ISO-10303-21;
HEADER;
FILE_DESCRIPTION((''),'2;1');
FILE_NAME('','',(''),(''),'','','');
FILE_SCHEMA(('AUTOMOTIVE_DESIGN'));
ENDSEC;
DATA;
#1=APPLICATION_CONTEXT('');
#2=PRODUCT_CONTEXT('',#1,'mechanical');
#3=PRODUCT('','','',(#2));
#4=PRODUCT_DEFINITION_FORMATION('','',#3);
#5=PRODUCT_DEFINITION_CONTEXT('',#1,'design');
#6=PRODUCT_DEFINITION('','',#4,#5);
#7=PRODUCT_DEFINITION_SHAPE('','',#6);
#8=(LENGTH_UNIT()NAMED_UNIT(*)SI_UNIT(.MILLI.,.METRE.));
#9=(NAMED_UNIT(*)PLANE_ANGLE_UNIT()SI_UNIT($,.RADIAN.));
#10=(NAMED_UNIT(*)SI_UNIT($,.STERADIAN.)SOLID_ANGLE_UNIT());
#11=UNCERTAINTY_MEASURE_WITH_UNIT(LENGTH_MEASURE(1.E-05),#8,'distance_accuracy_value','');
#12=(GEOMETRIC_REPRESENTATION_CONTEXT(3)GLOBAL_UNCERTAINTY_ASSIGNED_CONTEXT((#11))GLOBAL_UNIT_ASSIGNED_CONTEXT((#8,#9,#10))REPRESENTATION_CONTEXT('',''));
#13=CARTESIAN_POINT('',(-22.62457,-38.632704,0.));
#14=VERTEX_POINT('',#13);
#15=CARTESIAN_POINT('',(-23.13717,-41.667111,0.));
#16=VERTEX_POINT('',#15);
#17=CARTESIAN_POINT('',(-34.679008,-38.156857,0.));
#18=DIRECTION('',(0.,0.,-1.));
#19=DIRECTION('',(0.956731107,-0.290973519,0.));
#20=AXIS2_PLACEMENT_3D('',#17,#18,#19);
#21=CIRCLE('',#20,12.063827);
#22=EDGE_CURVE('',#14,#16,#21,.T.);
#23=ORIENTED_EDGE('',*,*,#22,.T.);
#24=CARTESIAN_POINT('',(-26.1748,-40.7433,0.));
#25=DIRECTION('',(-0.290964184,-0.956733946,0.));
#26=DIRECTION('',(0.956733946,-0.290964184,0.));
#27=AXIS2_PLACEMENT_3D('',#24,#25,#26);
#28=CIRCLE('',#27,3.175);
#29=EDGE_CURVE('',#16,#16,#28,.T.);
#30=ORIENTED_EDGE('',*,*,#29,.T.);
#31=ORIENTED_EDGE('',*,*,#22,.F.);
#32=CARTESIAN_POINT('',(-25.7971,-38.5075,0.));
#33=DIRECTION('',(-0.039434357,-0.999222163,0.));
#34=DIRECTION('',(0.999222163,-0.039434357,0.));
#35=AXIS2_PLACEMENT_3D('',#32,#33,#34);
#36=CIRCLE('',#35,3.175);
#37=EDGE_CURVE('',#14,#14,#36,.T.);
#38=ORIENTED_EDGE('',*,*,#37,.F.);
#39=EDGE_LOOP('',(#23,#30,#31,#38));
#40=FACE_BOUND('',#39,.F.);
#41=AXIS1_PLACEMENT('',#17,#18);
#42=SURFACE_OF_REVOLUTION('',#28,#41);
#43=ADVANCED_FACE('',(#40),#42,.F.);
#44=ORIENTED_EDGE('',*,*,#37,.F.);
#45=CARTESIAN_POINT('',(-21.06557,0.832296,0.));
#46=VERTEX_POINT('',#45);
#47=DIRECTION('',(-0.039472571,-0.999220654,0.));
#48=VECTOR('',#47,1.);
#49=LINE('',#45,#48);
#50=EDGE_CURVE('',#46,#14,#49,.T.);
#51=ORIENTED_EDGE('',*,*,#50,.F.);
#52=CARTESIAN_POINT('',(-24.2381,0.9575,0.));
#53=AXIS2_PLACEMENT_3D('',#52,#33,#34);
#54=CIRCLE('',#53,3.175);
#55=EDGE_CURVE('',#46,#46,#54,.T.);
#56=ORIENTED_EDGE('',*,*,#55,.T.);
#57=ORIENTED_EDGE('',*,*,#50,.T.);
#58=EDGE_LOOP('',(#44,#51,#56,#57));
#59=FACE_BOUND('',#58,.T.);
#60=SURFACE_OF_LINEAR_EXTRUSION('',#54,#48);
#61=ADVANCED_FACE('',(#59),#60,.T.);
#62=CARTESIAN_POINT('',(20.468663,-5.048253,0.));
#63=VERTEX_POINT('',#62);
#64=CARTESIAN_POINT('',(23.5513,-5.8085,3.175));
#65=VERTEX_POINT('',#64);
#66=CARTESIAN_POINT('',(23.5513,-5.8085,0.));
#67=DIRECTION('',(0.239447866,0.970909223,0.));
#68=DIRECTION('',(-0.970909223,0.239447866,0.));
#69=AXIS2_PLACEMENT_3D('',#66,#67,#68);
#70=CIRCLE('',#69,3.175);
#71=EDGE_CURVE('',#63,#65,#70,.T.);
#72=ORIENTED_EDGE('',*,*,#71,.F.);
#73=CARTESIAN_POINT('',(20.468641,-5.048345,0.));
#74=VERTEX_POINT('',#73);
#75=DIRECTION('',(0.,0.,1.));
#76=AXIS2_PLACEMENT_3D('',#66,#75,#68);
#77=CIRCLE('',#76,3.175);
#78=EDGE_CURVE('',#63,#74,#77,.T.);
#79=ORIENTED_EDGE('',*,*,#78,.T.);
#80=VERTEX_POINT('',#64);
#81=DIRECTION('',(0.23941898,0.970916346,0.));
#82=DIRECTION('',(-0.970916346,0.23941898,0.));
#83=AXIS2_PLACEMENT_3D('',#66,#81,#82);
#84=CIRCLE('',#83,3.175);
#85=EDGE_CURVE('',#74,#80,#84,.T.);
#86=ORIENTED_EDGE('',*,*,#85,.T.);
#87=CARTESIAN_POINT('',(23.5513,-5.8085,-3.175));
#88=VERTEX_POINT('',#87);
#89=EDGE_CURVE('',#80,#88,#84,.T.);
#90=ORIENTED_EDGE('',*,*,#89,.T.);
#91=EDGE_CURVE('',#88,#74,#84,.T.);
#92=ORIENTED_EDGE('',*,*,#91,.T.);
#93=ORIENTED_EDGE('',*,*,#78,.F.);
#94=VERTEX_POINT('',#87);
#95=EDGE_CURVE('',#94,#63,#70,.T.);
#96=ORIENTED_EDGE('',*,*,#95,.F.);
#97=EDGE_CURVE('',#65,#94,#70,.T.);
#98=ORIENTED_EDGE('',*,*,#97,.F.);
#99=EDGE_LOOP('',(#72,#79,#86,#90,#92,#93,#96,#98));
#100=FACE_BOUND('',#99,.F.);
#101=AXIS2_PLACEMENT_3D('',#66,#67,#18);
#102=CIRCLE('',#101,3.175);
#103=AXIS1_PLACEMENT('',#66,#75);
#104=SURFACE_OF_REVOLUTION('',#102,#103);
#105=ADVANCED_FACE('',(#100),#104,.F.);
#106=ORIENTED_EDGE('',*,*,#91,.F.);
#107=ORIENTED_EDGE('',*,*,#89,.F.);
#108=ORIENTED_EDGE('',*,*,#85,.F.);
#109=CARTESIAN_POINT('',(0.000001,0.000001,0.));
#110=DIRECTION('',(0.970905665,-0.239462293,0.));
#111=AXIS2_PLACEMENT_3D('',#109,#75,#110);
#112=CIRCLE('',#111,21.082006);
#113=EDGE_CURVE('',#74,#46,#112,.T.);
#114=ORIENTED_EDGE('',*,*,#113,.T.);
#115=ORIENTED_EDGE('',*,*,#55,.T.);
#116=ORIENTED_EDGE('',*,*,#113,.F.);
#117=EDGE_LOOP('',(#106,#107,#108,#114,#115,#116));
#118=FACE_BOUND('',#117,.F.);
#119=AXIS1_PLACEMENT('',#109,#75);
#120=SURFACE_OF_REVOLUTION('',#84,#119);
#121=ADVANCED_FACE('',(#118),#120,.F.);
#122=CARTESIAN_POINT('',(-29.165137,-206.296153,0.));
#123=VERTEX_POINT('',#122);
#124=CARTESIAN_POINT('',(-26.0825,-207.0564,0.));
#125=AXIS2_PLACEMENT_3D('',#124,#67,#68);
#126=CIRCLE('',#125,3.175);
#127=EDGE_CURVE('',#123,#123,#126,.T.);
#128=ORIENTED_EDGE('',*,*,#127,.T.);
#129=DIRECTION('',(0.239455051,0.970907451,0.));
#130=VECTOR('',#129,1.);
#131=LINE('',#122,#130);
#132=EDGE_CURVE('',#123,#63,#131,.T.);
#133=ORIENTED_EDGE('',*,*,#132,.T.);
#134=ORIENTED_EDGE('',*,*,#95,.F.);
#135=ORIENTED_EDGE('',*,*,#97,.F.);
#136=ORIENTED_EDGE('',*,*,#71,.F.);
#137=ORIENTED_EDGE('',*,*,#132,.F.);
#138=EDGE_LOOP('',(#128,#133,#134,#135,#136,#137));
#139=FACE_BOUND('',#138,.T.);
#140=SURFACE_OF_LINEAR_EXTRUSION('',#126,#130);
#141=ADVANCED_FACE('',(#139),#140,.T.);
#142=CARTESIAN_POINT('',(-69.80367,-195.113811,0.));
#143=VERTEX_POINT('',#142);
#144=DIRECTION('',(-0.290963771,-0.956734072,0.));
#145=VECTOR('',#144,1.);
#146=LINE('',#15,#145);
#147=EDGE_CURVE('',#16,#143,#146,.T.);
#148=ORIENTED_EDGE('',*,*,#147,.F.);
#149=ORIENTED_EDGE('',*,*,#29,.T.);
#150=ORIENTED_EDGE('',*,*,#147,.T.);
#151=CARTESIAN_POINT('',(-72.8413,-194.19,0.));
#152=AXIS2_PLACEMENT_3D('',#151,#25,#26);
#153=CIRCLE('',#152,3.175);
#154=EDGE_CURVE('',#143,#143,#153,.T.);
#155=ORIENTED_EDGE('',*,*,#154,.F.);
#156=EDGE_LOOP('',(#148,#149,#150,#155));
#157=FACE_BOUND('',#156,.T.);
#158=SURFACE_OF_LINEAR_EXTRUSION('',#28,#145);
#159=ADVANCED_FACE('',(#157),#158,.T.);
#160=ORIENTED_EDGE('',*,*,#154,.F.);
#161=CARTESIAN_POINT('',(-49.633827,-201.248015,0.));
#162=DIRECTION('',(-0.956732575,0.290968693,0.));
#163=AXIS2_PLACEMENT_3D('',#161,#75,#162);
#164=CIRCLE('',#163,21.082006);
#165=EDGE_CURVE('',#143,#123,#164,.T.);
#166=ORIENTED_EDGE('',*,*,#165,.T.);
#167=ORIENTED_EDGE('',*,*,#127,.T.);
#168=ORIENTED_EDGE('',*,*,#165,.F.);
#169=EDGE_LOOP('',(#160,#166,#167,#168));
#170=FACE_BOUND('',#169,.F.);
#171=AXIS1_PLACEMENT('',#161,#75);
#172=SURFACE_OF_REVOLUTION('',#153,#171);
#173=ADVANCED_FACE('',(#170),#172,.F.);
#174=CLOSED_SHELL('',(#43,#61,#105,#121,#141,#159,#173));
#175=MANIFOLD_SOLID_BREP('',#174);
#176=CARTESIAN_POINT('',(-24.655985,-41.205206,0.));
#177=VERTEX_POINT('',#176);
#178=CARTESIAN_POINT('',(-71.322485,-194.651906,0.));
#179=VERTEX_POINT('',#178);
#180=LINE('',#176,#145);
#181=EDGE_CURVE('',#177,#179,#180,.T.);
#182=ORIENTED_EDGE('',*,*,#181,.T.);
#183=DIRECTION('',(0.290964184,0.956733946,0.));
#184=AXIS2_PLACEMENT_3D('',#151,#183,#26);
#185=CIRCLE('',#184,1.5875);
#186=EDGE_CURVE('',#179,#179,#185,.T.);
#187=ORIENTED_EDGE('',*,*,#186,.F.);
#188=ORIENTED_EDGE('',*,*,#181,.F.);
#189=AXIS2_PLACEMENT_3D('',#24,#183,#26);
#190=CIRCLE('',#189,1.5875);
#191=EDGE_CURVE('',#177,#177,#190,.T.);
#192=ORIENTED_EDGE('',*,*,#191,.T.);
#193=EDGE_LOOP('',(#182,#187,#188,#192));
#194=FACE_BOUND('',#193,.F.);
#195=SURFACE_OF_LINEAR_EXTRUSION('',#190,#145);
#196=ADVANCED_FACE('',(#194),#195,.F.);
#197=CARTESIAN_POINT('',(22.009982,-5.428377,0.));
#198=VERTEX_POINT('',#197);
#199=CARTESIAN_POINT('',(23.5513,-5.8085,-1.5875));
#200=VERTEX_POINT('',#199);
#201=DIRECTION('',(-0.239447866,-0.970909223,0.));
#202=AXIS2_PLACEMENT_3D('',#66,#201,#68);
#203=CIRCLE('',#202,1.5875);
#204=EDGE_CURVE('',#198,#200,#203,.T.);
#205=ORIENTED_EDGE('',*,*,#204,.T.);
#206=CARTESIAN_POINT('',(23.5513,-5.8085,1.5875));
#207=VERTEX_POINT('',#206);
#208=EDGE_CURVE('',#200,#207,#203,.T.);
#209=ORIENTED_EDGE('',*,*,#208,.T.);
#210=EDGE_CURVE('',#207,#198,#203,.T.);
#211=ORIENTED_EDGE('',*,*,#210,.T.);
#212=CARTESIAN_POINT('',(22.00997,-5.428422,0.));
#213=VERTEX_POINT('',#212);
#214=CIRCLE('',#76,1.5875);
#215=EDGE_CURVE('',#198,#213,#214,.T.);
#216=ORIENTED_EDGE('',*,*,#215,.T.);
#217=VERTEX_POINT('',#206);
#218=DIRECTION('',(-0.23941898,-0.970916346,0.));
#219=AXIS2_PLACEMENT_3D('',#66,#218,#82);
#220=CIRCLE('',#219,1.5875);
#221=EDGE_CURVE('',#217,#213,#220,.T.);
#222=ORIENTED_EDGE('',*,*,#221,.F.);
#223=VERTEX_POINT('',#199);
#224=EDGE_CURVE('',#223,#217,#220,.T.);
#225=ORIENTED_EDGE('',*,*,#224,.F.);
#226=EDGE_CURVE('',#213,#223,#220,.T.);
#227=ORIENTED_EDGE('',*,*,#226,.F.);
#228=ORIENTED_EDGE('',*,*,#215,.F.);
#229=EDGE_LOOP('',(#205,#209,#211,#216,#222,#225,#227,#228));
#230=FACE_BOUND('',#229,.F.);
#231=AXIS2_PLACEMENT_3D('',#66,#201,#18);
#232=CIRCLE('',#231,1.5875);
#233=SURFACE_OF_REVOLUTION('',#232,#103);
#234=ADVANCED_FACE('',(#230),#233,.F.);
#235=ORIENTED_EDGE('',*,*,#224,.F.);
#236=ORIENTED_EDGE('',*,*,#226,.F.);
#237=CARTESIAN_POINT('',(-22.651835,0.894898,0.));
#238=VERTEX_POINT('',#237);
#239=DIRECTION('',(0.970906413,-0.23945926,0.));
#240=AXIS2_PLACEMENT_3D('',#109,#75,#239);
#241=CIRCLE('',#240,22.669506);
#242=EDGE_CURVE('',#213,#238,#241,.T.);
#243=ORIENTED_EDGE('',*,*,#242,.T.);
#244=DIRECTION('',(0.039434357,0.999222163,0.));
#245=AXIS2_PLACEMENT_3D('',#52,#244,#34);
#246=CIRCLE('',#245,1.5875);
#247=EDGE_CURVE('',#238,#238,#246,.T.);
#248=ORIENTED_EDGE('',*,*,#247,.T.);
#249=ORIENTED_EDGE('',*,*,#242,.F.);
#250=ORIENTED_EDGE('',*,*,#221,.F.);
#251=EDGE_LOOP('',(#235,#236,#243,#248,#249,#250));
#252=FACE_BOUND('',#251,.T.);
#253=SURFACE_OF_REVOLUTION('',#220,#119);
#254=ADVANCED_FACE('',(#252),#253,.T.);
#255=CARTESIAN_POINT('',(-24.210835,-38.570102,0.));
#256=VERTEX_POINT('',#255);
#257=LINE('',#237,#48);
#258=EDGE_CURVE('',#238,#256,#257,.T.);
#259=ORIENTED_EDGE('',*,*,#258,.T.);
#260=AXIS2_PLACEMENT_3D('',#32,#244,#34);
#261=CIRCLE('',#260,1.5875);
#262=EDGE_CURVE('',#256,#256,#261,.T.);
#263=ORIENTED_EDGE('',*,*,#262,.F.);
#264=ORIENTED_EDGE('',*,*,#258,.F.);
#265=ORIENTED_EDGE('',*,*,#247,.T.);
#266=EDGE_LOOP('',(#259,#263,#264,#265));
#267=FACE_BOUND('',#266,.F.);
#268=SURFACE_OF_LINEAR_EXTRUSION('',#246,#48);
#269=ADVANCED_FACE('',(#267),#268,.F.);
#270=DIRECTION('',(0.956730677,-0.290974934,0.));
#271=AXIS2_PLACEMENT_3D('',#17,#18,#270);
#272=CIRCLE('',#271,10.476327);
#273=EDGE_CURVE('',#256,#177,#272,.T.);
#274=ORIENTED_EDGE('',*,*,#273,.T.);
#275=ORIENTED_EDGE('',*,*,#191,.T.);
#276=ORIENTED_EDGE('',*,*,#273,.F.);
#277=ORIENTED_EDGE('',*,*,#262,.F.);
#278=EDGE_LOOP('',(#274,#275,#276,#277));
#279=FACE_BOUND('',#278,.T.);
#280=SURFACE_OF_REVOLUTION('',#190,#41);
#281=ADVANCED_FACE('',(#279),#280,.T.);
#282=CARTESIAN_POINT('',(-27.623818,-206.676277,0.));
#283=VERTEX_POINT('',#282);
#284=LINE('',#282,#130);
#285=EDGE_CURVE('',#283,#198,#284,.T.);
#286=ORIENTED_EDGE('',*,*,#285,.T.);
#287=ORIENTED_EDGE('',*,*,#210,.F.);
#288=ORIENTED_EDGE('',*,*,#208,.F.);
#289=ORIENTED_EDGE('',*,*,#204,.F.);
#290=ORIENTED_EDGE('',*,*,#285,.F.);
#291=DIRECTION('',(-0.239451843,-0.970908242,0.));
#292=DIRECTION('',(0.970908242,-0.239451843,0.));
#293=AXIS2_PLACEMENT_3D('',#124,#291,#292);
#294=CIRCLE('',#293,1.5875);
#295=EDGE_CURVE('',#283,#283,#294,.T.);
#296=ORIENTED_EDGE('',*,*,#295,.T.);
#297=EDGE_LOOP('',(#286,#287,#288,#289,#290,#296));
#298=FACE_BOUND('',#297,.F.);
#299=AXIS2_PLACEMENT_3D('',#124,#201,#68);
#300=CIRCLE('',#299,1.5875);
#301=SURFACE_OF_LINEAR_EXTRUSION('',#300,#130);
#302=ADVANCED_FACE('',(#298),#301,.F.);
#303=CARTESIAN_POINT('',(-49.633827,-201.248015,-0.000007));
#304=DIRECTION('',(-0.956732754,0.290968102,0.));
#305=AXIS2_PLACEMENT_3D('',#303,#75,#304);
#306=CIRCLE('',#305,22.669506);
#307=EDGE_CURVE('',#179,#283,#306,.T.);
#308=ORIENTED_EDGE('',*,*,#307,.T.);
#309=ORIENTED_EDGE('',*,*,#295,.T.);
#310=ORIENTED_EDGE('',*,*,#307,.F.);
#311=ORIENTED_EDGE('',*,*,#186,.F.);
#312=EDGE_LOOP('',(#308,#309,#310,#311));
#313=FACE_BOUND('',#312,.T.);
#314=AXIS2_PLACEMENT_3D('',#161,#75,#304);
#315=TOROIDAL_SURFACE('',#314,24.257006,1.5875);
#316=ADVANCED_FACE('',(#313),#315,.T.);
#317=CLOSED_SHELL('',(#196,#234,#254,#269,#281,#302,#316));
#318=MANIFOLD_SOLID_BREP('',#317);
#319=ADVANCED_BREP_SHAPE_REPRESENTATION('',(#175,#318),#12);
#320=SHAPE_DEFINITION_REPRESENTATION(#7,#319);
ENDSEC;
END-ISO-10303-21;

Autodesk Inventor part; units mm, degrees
ref_plane "YZ Plane" through (0, 0, 0) normal (1, 0, 0) x (0, 1, 0)
ref_plane "XZ Plane" through (0, 0, 0) normal (0, 1, 0) x (-1, 0, 0)
sketch "Sketch1" plane through (0, 0, 0) normal (0, 0, 1) x (1, 0, 0)
  circle A0 centre (0, 0) radius 21.082 construction
  circle A1 centre (-49.6338, -201.248) radius 21.082 construction
  arc A2 (23.5513, -5.8085) -> (-24.2381, 0.9575) centre (0, 0) ccw
  arc A3 (-72.8413, -194.19) -> (-26.0825, -207.0564) centre (-49.6338, -201.248) ccw
  circle A4 centre (-34.6801, -38.1566) radius 5.715 construction
  arc A5 (-26.1748, -40.7433) -> (-25.7971, -38.5075) centre (-34.6801, -38.1566) ccw
  line L0 (-26.1748, -40.7433) -> (-72.8413, -194.19)
  line L1 (-26.0825, -207.0564) -> (23.5513, -5.8085)
  line L2 (-24.2381, 0.9575) -> (-25.7971, -38.5075)
  point P0 (0, 0)
  dimension "d0" = 11.43
  dimension "d1" = 17.78
  dimension "d2" = 42.164
  dimension "d3" = 48.514
  dimension "d4" = 42.164
  dimension "d5" = 48.514
ref_plane "Work Plane1" through (-72.8413, -194.19, 0) normal (-0.2909642, -0.956734, 0) x (0.956734, -0.2909642, 0)
sketch "Sketch2" plane through (-72.8413, -194.19, 0) normal (-0.2909642, -0.956734, 0) x (0.956734, -0.2909642, 0)
  circle A0 centre (0, 0) radius 3.175
  circle A1 centre (0, 0) radius 1.5875
  point P0 (13.1874, 0)
  dimension "d6" = 6.35
  dimension "d7" = 3.175
sweep "Sweep1" add profiles "Sketch2" path "Sketch1"
properties part number "Polycord"
